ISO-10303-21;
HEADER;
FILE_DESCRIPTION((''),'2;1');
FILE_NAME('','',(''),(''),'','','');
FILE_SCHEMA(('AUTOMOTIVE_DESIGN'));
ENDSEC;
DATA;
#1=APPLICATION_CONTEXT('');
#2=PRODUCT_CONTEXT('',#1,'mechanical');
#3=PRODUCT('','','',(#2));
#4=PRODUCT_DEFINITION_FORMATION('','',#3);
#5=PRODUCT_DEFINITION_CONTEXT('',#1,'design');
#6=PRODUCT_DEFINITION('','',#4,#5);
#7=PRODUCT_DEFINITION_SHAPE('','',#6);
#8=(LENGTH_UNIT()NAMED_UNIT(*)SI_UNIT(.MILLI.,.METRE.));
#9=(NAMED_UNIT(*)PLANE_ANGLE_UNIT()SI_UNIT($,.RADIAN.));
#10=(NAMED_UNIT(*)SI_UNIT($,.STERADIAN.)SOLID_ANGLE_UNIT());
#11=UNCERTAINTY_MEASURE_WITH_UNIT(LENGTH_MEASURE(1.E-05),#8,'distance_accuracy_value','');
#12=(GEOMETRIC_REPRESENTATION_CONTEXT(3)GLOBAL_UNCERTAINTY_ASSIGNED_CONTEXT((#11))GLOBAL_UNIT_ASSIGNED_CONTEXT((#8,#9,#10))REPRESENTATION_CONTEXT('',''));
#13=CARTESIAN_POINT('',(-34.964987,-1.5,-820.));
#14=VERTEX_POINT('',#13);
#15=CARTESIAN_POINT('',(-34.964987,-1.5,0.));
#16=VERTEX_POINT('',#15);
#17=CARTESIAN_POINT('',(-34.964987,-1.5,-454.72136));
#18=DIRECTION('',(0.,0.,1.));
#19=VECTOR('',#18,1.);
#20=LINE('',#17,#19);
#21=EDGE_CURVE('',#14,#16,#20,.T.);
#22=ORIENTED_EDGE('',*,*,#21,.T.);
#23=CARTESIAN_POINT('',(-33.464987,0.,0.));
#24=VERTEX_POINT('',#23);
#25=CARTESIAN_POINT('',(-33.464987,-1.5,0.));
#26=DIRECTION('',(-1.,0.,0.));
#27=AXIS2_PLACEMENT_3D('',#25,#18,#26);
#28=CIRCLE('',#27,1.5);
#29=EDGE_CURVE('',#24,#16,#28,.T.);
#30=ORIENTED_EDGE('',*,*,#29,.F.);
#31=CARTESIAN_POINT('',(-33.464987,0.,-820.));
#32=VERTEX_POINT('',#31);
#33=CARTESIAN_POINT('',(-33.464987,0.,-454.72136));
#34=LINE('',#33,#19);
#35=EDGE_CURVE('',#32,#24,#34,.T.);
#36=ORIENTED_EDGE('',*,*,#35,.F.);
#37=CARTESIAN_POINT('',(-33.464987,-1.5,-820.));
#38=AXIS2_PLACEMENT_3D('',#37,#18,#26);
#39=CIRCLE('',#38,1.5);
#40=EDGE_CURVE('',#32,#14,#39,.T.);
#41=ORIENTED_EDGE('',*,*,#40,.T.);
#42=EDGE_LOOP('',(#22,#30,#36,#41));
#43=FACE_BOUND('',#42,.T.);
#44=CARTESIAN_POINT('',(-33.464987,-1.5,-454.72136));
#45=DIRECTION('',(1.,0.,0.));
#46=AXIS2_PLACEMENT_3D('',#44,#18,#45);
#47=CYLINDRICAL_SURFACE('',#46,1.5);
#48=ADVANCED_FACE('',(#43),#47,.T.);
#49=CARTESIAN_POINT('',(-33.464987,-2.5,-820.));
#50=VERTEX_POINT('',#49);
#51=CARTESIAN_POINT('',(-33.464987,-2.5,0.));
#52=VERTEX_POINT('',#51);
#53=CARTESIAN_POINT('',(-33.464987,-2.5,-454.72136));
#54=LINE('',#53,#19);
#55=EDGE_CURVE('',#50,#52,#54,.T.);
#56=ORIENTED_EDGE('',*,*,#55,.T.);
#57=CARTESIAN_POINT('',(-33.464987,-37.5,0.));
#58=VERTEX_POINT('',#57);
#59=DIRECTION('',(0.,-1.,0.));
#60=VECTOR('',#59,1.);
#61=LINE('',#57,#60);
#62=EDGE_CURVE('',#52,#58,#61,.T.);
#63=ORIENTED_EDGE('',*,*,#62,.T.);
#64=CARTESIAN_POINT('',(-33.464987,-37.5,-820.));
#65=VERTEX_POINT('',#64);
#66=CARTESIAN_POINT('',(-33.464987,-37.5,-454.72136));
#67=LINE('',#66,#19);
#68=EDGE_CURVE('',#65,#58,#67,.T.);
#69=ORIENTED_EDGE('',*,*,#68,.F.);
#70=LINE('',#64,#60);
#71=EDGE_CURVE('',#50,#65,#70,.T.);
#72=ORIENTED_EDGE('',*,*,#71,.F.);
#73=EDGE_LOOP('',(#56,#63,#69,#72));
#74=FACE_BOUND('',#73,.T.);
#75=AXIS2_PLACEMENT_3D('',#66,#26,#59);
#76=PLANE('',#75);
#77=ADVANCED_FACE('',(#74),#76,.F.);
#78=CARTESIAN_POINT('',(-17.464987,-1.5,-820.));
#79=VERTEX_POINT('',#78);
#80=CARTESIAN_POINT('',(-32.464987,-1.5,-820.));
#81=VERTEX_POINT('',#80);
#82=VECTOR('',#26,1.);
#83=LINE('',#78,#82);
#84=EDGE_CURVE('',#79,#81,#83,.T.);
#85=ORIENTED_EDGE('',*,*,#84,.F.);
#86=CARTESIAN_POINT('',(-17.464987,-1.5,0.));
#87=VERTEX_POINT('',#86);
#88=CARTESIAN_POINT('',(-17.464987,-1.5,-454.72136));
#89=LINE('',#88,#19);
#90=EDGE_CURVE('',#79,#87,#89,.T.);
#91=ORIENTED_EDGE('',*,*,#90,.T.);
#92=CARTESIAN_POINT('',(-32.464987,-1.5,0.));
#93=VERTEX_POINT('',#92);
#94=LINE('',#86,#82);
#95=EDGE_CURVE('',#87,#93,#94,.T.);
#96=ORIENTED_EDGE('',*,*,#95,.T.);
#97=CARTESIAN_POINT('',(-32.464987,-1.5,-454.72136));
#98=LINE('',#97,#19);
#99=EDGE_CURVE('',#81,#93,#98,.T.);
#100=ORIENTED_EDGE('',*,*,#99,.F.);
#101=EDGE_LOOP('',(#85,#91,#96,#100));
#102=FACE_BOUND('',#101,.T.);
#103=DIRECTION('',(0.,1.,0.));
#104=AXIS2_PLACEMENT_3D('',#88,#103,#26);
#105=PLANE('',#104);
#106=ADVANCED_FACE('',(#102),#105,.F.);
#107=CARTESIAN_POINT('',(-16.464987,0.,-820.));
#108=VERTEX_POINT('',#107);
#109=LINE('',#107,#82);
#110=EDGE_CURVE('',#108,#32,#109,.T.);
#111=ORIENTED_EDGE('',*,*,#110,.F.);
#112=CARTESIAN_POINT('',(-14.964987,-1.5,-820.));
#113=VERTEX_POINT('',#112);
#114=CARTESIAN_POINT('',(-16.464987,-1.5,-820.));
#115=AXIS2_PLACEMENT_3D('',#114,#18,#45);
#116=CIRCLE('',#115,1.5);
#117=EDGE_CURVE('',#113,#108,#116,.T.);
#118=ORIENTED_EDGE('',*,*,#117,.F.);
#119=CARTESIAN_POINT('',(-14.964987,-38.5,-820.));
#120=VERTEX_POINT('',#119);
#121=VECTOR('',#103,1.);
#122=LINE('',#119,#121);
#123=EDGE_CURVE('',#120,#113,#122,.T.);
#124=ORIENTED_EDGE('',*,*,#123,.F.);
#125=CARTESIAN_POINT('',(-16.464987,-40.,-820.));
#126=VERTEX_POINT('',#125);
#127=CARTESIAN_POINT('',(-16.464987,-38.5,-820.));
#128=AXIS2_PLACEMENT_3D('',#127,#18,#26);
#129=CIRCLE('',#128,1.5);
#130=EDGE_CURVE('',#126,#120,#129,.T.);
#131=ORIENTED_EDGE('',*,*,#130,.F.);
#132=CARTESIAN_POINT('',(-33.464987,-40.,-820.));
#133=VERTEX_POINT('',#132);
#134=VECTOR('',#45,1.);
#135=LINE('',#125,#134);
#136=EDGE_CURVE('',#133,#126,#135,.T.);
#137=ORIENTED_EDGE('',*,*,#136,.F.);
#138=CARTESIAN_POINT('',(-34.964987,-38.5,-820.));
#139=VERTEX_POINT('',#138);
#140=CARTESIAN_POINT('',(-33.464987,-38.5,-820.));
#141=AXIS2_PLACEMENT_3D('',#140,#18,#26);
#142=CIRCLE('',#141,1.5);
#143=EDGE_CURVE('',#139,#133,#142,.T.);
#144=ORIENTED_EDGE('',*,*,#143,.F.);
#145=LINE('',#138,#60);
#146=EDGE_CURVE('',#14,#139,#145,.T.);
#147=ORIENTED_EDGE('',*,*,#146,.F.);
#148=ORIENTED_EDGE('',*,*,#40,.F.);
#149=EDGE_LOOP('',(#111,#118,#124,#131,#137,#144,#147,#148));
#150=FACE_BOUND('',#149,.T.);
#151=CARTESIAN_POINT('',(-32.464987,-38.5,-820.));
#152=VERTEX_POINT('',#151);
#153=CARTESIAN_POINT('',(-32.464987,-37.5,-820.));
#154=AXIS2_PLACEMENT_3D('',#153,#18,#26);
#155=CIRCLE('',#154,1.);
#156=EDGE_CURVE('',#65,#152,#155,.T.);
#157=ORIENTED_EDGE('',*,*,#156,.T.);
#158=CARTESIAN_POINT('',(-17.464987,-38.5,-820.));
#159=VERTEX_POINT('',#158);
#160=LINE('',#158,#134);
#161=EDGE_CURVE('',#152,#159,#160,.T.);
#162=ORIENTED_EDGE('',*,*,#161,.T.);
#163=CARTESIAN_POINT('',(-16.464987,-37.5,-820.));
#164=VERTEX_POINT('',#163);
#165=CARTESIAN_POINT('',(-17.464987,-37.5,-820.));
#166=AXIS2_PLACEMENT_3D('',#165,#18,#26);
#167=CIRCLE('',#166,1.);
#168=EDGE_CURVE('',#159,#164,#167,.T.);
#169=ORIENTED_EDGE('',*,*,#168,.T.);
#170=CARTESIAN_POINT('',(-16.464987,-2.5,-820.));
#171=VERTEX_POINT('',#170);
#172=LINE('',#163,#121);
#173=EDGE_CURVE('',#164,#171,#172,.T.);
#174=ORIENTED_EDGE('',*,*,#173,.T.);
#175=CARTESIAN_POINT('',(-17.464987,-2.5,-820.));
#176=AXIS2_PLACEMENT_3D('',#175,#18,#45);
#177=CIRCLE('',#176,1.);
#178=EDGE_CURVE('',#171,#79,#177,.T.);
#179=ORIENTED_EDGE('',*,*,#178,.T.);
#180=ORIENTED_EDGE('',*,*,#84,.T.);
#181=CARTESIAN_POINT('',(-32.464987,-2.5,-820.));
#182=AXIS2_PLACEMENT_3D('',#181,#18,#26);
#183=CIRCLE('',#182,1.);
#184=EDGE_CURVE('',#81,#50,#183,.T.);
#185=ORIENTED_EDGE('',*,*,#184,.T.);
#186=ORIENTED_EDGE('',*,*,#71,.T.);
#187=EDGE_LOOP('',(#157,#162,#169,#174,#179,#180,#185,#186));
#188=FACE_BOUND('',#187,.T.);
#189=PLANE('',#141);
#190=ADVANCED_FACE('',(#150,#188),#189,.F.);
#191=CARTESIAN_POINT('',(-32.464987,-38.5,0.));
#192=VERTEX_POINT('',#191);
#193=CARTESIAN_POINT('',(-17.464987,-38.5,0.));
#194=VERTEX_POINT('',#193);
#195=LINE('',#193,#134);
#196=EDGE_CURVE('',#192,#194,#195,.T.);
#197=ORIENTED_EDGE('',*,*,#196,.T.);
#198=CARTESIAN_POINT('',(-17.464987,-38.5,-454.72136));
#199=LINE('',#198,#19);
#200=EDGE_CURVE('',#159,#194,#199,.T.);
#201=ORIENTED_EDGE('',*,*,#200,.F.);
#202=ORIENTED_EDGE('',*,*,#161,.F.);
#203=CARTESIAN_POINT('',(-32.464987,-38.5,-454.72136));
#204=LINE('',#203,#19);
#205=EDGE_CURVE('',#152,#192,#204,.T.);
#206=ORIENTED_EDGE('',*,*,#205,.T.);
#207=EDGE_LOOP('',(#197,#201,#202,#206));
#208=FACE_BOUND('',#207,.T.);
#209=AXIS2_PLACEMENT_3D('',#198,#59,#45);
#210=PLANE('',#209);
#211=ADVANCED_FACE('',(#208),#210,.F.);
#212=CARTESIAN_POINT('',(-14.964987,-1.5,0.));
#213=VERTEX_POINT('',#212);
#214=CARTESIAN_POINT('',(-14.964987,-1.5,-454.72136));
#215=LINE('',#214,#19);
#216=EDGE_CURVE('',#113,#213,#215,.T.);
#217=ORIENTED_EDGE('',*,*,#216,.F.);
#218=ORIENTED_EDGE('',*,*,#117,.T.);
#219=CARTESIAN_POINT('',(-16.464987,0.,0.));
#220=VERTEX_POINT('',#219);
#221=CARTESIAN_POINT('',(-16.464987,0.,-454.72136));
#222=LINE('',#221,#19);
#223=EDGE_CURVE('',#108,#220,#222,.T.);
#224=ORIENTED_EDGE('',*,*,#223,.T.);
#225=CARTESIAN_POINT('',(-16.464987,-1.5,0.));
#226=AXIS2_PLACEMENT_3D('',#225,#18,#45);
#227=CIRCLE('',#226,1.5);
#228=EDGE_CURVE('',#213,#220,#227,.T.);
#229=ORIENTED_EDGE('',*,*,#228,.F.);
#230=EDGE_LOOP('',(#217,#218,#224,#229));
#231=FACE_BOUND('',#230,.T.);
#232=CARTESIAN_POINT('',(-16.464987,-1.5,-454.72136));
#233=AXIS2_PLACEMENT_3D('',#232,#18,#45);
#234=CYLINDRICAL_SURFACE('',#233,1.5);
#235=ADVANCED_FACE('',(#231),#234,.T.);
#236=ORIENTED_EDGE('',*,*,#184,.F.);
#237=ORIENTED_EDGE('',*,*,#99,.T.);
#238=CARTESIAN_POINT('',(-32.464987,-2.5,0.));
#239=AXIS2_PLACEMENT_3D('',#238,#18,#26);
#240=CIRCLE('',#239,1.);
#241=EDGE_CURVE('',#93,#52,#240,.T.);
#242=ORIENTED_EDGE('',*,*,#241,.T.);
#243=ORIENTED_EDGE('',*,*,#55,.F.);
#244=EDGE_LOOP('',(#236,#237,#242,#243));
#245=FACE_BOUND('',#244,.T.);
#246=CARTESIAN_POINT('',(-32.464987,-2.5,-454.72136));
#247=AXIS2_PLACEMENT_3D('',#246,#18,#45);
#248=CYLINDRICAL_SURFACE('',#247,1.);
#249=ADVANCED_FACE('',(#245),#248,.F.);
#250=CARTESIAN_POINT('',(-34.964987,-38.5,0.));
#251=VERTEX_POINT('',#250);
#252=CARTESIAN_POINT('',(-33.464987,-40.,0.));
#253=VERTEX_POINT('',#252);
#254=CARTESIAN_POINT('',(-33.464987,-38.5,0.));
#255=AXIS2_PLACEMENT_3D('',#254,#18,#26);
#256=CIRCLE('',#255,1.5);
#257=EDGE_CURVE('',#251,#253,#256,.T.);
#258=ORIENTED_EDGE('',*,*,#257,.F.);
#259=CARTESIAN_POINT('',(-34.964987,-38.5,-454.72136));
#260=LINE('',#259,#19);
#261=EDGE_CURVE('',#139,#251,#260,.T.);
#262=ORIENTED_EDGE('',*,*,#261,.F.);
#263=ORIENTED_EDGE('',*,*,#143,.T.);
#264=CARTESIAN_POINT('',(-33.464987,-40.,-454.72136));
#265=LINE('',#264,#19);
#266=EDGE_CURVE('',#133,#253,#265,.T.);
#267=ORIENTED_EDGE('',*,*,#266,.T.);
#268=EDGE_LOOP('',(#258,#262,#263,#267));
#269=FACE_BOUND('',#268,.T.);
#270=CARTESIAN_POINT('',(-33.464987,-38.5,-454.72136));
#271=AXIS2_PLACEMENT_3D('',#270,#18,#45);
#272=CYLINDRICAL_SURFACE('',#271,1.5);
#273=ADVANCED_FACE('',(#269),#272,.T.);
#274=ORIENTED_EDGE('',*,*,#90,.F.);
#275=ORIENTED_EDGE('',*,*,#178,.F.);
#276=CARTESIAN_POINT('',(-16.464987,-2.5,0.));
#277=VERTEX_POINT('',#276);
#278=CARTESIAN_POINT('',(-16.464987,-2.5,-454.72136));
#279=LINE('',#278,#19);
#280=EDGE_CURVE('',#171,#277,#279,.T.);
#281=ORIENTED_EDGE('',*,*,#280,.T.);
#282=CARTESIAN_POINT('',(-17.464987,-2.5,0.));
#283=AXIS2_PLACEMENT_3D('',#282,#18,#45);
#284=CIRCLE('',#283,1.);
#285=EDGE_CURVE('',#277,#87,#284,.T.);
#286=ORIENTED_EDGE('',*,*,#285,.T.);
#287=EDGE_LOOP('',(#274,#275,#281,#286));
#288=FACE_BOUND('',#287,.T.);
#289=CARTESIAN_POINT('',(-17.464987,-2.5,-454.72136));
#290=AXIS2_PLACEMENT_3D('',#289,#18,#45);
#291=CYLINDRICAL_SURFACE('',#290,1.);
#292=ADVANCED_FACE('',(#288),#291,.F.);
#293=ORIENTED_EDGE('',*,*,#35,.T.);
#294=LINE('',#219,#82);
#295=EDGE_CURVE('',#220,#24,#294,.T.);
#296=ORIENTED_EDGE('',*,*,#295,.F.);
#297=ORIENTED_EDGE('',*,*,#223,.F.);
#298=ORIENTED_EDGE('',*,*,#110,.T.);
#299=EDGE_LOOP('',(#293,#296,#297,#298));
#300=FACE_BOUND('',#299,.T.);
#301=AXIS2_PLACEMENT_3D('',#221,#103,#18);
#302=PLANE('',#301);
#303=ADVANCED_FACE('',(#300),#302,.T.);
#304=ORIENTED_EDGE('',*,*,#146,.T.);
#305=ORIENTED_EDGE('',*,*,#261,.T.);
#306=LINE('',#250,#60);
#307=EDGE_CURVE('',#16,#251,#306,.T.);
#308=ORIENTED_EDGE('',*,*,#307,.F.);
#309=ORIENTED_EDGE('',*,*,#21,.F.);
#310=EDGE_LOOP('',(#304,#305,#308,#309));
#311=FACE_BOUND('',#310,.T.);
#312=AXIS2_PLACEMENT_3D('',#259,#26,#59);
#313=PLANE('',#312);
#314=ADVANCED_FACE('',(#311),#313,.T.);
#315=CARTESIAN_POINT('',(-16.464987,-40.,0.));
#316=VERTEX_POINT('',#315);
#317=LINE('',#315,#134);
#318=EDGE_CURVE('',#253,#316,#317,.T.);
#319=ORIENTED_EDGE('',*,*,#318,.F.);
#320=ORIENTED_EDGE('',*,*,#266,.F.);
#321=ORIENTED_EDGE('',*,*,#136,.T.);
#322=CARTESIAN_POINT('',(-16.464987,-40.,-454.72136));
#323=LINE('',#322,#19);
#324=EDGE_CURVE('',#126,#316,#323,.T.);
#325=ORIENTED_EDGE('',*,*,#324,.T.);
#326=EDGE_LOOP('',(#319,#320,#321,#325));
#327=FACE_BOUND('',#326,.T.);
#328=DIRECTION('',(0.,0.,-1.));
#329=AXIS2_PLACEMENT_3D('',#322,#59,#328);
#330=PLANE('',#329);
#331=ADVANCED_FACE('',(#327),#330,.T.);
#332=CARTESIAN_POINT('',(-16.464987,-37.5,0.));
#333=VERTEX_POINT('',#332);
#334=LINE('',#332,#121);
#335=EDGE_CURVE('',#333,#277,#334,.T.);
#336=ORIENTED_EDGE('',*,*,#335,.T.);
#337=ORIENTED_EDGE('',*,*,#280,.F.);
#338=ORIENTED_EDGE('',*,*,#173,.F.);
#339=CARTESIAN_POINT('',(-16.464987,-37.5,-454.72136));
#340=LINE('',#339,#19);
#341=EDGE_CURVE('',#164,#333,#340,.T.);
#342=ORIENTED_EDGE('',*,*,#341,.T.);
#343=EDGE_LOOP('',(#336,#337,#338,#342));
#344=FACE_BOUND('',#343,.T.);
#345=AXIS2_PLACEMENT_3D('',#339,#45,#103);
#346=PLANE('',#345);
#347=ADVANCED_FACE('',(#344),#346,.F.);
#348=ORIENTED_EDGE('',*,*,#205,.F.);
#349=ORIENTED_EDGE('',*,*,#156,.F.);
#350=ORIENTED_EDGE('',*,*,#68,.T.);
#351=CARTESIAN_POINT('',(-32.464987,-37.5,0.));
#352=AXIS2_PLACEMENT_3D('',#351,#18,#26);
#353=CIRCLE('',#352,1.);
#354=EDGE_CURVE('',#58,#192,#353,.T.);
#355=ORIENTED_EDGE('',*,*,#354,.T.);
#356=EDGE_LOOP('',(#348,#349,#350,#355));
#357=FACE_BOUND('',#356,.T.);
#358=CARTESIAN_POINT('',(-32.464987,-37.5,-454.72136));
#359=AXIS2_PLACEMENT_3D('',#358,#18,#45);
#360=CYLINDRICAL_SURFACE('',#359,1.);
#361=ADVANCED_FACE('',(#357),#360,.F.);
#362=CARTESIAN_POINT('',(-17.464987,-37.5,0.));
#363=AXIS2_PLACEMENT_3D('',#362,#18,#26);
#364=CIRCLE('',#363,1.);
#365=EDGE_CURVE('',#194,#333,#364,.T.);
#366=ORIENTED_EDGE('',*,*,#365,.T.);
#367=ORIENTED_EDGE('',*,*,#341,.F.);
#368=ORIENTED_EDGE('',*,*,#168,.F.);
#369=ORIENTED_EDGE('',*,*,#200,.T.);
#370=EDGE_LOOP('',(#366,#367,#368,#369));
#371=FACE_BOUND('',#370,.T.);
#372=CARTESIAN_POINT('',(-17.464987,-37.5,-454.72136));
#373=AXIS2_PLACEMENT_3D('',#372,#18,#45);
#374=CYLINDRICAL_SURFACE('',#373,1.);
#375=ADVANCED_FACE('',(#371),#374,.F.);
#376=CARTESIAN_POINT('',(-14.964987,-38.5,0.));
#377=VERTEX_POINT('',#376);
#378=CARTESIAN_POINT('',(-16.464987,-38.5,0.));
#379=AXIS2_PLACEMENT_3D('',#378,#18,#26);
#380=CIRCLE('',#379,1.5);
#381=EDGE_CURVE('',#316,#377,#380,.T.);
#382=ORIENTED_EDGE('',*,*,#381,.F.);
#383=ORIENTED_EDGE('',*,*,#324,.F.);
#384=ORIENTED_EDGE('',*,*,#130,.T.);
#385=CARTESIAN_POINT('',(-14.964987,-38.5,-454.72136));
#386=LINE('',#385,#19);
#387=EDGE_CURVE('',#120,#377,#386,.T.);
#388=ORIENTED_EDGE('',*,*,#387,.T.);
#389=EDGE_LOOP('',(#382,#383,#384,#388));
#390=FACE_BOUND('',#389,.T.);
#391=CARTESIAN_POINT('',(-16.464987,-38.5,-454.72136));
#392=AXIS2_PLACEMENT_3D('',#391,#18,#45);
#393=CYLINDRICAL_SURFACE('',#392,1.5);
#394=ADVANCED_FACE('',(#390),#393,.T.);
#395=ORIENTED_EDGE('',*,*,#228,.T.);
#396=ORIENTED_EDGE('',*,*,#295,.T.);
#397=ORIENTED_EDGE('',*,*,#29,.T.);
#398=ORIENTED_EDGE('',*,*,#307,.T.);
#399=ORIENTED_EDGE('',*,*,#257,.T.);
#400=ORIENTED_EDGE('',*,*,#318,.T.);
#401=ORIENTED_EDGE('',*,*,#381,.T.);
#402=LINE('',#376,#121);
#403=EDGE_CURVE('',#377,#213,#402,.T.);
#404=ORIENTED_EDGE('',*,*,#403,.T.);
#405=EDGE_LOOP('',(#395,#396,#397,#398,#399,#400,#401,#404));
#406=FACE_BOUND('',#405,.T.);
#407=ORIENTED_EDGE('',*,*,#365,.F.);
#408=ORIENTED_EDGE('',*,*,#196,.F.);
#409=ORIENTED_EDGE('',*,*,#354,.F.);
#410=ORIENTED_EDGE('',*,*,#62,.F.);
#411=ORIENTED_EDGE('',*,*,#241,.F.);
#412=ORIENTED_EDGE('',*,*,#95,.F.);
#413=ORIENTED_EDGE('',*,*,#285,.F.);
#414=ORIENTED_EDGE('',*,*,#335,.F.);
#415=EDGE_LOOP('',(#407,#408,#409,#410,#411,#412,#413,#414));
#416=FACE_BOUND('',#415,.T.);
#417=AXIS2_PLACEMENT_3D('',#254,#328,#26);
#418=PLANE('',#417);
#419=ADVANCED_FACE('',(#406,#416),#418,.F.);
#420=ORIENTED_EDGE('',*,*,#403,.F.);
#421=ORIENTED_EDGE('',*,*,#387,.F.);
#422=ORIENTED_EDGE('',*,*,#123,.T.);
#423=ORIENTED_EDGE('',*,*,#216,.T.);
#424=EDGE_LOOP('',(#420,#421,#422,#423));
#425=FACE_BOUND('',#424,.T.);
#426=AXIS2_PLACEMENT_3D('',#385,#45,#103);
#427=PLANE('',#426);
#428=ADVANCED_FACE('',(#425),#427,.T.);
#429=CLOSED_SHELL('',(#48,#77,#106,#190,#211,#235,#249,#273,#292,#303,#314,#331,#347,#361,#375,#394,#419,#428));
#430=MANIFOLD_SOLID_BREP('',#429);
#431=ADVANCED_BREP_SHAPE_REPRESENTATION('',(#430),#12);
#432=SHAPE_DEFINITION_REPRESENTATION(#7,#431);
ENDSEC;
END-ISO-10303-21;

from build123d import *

# Parameters (mm, degrees)
EXTRUDE_START   = -410
EXTRUDE_1_DEPTH = 410


# Read off the part's stored shape, not the designer's step: Бобышка-Вытянуть1
with BuildPart() as part:
    # Бобышка-Вытянуть1 outline → Бобышка-Вытянуть1 (new body)
    with BuildSketch(Plane.XY.offset(EXTRUDE_START)):
        with BuildLine():
            ThreePointArc((-34.964986884, -38.5), (-34.525647056, -39.560660172), (-33.464986884, -40))
            Line((-33.464986884, -40), (-16.464986884, -40))
            ThreePointArc((-16.464986884, -40), (-15.404326712, -39.560660172), (-14.964986884, -38.5))
            Line((-14.964986884, -38.5), (-14.964986884, -1.5))
            ThreePointArc((-14.964986884, -1.5), (-15.404326712, -0.439339828), (-16.464986884, 0))
            Line((-16.464986884, 0), (-33.464986884, 0))
            ThreePointArc((-33.464986884, 0), (-34.525647056, -0.439339828), (-34.964986884, -1.5))
            Line((-34.964986884, -1.5), (-34.964986884, -38.5))
        make_face()
        with BuildLine():
            Line((-33.464986884, -37.5), (-33.464986884, -2.5))
            ThreePointArc((-33.464986884, -2.5), (-33.172093665, -1.792893219), (-32.464986884, -1.5))
            Line((-32.464986884, -1.5), (-17.464986884, -1.5))
            ThreePointArc((-17.464986884, -1.5), (-16.757880103, -1.792893219), (-16.464986884, -2.5))
            Line((-16.464986884, -2.5), (-16.464986884, -37.5))
            ThreePointArc((-16.464986884, -37.5), (-16.757880103, -38.207106781), (-17.464986884, -38.5))
            Line((-17.464986884, -38.5), (-32.464986884, -38.5))
            ThreePointArc((-32.464986884, -38.5), (-33.172093665, -38.207106781), (-33.464986884, -37.5))
        make_face(mode=Mode.SUBTRACT)
    extrude(amount=EXTRUDE_1_DEPTH)

    # Зеркальное отражение1: part across plane


with BuildPart() as part_1:
    add(part.part)
    add(part.part.mirror(Plane(origin=(441.299876816, -806.206552751, -410), x_dir=(1, 0, 0), z_dir=(0, 0, 1))))


solid = part_1.part
